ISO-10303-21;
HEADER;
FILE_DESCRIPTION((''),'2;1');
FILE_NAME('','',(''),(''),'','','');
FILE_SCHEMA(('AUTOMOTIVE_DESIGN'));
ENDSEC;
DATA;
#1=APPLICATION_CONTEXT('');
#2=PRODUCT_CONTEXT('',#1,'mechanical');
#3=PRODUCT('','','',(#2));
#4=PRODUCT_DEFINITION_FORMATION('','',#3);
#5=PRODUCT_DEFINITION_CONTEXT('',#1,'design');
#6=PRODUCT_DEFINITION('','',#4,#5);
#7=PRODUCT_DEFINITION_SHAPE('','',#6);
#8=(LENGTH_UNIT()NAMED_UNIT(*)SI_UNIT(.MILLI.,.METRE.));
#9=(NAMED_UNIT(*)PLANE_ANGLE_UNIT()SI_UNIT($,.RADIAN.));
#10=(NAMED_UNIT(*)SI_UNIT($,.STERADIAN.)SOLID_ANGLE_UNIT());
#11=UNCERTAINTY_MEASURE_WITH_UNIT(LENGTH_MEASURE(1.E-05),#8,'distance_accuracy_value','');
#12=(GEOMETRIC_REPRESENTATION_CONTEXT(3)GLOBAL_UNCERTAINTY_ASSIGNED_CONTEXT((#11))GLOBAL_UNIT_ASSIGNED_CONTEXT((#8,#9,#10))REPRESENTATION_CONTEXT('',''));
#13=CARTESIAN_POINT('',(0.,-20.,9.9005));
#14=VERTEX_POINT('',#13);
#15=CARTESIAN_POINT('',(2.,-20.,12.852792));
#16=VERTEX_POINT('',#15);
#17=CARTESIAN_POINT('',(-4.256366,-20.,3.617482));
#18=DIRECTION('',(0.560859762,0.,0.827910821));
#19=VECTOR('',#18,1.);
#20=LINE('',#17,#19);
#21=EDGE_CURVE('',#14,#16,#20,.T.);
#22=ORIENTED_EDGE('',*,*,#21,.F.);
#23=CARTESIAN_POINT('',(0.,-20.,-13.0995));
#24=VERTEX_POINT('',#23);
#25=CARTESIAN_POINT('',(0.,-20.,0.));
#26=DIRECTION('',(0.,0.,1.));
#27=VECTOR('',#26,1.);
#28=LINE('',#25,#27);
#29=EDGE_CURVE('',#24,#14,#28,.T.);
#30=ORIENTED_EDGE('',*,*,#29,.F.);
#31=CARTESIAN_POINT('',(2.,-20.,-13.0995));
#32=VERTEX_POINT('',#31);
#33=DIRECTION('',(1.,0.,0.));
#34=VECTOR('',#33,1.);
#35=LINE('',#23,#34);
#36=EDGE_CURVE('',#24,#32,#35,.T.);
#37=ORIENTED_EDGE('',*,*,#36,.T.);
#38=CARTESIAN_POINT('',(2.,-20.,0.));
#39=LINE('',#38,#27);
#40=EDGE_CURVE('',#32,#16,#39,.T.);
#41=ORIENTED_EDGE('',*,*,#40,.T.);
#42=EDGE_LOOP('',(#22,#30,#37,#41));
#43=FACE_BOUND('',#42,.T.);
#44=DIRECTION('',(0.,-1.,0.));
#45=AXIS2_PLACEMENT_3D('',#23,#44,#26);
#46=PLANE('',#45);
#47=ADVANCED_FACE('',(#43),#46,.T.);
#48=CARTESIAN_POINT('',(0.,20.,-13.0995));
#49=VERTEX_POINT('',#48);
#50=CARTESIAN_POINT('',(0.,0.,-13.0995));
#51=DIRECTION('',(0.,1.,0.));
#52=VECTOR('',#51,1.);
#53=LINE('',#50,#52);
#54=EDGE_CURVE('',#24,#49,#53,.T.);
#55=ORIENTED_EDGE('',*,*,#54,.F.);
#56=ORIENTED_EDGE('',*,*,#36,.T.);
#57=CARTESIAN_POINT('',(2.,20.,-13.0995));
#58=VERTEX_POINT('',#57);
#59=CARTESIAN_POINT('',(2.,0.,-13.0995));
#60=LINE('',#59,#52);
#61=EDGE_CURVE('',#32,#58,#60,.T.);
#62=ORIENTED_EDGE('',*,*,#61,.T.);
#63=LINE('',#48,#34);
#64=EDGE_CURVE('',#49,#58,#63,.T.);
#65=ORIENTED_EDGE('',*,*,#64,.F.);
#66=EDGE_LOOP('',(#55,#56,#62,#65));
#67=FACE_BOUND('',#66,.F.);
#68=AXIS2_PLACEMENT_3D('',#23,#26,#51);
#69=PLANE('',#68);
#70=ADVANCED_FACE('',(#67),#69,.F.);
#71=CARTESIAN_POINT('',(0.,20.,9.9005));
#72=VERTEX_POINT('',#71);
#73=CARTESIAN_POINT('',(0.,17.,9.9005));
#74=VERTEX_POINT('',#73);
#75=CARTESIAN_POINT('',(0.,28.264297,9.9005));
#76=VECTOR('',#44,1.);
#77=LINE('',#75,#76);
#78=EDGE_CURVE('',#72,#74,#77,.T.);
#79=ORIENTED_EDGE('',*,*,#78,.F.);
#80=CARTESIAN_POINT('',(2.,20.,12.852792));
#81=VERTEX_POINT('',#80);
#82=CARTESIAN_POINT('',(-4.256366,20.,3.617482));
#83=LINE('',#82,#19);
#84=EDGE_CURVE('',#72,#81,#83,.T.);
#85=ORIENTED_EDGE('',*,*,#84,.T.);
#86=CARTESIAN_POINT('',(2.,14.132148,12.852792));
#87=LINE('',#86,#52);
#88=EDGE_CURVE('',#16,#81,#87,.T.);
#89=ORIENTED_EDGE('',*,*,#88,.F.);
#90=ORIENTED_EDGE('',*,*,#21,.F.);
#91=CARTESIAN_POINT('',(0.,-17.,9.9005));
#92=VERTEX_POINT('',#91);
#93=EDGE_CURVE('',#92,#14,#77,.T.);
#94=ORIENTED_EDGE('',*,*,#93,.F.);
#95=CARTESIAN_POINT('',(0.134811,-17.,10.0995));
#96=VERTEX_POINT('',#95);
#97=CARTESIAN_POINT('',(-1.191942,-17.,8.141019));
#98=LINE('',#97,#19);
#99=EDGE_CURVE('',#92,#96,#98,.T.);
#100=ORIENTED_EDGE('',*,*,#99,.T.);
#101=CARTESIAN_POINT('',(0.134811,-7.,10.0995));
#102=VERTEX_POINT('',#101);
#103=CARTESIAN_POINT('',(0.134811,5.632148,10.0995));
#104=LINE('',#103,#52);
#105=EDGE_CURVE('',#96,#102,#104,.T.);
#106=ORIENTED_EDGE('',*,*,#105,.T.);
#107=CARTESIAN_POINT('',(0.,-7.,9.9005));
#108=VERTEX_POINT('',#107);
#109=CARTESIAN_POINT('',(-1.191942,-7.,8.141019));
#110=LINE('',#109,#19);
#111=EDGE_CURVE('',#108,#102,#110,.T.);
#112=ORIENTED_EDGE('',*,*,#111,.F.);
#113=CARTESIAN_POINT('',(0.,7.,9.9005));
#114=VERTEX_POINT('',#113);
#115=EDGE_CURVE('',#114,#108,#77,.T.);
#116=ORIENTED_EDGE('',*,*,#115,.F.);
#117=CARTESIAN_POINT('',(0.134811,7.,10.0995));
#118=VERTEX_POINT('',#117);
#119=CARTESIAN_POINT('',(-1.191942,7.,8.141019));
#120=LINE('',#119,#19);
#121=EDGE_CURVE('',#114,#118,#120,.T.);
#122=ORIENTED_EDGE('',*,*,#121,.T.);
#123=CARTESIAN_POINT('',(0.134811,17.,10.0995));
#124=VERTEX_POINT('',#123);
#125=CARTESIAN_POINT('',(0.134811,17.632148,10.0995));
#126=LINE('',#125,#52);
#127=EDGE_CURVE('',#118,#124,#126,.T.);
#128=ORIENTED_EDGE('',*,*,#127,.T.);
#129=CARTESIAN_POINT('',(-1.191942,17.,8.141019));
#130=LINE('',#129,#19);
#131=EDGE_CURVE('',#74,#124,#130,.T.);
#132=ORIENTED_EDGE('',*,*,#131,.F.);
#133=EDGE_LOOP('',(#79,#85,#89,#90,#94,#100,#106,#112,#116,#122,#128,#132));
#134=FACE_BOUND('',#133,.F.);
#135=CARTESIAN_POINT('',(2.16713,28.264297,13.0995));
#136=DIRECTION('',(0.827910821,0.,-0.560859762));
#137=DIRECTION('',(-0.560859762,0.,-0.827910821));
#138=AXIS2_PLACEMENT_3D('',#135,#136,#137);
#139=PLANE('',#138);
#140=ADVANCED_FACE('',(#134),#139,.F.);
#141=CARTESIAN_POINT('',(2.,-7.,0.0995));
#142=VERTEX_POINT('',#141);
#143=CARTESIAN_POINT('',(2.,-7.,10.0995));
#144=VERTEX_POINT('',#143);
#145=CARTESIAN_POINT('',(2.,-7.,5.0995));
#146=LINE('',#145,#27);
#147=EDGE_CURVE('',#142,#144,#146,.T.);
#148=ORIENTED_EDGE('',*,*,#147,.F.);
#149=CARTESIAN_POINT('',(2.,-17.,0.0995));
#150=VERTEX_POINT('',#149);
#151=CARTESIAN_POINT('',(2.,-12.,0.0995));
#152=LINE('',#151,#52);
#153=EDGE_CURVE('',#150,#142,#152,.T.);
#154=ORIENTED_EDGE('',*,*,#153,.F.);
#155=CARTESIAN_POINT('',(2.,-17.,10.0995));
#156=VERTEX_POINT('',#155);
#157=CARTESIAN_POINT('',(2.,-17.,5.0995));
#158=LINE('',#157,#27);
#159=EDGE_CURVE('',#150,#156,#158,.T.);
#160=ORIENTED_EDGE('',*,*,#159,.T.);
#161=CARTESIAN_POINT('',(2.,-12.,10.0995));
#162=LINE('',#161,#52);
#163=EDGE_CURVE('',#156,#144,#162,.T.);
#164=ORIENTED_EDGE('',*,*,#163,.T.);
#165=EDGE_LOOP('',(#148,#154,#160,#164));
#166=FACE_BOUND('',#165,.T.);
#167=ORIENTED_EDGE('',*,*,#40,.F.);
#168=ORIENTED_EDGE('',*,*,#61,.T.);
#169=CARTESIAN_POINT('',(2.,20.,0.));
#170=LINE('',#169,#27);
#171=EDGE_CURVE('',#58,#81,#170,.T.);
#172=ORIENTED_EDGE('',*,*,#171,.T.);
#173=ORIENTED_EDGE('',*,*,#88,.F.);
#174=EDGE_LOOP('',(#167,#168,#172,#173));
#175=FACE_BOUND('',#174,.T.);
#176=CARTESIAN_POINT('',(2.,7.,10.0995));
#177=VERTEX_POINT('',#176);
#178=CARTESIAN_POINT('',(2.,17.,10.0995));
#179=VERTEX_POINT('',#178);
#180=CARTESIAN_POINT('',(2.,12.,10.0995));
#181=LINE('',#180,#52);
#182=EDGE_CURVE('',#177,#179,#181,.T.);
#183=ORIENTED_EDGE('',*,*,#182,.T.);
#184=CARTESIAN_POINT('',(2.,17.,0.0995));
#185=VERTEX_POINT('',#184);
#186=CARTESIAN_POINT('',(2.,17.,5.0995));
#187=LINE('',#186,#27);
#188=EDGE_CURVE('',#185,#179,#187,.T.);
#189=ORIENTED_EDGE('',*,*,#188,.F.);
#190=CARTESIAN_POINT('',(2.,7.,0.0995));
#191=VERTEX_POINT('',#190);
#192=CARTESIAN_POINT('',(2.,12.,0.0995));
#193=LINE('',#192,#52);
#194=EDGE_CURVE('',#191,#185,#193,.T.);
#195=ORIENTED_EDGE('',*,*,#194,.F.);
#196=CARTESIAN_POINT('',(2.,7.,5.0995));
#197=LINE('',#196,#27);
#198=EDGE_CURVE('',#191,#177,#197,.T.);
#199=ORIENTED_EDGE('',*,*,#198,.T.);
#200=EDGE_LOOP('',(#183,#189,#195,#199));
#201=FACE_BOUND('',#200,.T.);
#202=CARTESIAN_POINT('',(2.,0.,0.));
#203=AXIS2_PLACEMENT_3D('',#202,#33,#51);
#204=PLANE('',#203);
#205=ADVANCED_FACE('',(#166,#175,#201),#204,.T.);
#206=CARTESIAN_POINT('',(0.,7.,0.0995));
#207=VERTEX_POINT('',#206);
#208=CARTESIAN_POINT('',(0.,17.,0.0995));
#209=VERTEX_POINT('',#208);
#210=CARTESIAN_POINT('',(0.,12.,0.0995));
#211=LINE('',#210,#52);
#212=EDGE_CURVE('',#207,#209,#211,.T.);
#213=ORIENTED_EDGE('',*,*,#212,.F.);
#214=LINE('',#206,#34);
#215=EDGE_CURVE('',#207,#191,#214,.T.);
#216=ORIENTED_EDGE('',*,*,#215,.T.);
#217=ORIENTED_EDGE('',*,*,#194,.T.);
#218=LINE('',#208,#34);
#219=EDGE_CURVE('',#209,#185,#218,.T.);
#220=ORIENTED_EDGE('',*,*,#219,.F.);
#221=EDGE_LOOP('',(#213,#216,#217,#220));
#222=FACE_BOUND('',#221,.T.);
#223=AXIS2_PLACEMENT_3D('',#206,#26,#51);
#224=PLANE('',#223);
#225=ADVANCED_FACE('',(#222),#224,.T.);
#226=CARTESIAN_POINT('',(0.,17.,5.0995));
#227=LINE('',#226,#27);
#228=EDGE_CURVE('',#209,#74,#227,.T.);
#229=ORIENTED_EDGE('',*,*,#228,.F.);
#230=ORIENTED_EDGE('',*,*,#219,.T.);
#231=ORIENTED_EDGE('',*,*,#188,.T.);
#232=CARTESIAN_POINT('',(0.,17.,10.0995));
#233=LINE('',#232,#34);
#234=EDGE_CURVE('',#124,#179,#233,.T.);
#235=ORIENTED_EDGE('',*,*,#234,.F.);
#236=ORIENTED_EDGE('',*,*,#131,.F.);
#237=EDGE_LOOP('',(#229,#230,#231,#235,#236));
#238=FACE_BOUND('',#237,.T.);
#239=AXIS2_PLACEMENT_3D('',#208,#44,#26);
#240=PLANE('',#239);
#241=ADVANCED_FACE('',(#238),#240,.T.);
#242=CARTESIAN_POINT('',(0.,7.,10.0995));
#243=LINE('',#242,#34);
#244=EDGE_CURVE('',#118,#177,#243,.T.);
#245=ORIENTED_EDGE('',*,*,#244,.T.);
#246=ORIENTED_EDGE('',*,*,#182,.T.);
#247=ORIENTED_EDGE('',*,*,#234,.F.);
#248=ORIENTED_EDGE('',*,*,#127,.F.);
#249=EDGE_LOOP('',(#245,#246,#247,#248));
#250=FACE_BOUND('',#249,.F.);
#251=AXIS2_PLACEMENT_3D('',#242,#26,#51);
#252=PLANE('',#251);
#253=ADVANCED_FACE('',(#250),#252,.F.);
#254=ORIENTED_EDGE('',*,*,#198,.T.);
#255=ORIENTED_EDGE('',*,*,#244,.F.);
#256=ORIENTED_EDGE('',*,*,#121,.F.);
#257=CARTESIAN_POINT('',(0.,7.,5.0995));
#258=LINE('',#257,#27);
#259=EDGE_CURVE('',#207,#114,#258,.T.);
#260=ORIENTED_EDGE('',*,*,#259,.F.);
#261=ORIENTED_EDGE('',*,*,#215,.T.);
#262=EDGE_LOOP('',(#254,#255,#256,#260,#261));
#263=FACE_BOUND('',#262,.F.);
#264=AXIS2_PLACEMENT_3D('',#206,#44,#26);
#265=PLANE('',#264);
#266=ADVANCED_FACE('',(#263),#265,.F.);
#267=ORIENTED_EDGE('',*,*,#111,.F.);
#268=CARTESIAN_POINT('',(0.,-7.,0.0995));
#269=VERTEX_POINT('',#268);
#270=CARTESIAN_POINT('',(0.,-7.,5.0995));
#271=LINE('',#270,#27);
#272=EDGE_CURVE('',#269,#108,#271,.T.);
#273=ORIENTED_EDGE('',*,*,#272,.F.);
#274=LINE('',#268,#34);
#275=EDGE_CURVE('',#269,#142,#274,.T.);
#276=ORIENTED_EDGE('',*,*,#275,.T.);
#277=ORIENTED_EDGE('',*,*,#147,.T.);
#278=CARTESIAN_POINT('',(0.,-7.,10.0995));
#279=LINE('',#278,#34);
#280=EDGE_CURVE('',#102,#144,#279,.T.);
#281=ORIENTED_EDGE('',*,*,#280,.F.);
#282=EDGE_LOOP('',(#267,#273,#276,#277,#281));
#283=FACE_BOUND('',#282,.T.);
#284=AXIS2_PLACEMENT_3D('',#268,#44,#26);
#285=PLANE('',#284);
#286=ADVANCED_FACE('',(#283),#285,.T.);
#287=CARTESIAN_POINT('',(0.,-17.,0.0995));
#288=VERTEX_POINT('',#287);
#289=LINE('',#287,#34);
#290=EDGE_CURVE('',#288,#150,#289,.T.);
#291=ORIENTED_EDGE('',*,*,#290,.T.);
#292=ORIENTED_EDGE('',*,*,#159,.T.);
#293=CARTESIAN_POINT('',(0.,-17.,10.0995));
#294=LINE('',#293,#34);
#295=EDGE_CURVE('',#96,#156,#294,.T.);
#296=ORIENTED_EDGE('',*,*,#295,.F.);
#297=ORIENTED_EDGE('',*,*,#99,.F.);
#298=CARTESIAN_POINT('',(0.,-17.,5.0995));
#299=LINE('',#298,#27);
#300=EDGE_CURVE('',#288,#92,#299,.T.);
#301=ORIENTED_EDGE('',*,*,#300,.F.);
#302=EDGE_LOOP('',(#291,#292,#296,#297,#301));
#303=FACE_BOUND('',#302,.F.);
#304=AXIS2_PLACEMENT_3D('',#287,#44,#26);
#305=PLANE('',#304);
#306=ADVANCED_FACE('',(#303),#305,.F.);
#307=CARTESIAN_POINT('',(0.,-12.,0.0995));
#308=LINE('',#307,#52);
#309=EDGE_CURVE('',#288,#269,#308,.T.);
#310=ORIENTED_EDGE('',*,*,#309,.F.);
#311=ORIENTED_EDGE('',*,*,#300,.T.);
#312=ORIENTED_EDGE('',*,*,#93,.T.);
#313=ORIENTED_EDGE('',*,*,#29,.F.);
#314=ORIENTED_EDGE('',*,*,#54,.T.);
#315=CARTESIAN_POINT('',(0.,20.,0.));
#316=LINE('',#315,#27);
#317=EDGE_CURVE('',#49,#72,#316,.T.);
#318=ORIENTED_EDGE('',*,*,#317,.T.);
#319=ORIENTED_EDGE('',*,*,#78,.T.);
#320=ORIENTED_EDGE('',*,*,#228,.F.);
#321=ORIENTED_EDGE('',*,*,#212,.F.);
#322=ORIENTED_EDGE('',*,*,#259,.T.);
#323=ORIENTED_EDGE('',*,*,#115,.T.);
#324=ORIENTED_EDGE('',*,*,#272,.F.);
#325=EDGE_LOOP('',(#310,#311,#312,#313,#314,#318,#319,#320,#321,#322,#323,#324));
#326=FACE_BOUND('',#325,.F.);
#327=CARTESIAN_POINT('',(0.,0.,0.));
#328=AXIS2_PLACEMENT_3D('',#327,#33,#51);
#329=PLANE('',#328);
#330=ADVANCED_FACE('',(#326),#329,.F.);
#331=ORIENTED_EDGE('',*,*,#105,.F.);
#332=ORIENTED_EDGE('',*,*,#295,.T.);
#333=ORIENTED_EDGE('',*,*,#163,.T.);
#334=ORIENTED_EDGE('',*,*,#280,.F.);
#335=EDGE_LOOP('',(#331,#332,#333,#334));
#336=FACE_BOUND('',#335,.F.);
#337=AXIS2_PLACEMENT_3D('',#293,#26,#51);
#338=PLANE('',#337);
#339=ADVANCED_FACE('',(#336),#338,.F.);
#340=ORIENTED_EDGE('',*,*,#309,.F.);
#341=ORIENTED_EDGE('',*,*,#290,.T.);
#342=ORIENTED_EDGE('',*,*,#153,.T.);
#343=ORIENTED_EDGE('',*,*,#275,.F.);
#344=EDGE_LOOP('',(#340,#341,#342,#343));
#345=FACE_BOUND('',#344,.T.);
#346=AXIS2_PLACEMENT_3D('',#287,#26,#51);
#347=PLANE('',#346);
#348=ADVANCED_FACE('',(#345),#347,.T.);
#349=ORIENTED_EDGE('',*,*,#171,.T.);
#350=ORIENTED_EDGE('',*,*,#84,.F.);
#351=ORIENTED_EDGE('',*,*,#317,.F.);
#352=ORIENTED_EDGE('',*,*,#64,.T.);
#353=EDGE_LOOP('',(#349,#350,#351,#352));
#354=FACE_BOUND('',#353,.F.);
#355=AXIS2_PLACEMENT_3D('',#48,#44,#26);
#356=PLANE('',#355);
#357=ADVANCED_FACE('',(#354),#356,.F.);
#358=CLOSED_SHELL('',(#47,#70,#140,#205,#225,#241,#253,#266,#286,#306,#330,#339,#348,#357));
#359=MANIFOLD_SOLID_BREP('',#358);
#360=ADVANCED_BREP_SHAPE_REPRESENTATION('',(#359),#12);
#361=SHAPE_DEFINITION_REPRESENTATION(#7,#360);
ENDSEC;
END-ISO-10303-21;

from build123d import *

# Parameters (mm, degrees)
F0_W        = 40
F0_H        = 26.199
F0_W_2      = 10
F0_H_2      = 10
F1_DEPTH    = 2
F2_T1_DEPTH = 56.5285930149


# Not quite as in the source:
# - a fillet or chamfer that OpenCascade refuses, or shapes differently, is made with other operations: its cross-section is extruded or revolved along the edge and cut away or added


with BuildPart() as f1:
    # F0 (on Right) → F1 (new body)
    with BuildSketch(Plane.YZ):
        Rectangle(F0_W, F0_H)
        with Locations((-12, 5.0995)):
            Rectangle(F0_W_2, F0_H_2, mode=Mode.SUBTRACT)
        with Locations((12, 5.0995)):
            Rectangle(F0_W_2, F0_H_2, mode=Mode.SUBTRACT)
    extrude(amount=F1_DEPTH)

    # F2: chamfer of 2.16713 x 3.199 on 1 edges, made by hand

    # F2_s2 → F2_t1 (cut)
    with BuildSketch(Plane.XZ.offset(-28.2642965075)):
        Polygon((2.16713, 13.0995), (0, 9.9005), (0, 13.0995), align=None)
    extrude(amount=F2_T1_DEPTH, mode=Mode.SUBTRACT)


solid = f1.part
